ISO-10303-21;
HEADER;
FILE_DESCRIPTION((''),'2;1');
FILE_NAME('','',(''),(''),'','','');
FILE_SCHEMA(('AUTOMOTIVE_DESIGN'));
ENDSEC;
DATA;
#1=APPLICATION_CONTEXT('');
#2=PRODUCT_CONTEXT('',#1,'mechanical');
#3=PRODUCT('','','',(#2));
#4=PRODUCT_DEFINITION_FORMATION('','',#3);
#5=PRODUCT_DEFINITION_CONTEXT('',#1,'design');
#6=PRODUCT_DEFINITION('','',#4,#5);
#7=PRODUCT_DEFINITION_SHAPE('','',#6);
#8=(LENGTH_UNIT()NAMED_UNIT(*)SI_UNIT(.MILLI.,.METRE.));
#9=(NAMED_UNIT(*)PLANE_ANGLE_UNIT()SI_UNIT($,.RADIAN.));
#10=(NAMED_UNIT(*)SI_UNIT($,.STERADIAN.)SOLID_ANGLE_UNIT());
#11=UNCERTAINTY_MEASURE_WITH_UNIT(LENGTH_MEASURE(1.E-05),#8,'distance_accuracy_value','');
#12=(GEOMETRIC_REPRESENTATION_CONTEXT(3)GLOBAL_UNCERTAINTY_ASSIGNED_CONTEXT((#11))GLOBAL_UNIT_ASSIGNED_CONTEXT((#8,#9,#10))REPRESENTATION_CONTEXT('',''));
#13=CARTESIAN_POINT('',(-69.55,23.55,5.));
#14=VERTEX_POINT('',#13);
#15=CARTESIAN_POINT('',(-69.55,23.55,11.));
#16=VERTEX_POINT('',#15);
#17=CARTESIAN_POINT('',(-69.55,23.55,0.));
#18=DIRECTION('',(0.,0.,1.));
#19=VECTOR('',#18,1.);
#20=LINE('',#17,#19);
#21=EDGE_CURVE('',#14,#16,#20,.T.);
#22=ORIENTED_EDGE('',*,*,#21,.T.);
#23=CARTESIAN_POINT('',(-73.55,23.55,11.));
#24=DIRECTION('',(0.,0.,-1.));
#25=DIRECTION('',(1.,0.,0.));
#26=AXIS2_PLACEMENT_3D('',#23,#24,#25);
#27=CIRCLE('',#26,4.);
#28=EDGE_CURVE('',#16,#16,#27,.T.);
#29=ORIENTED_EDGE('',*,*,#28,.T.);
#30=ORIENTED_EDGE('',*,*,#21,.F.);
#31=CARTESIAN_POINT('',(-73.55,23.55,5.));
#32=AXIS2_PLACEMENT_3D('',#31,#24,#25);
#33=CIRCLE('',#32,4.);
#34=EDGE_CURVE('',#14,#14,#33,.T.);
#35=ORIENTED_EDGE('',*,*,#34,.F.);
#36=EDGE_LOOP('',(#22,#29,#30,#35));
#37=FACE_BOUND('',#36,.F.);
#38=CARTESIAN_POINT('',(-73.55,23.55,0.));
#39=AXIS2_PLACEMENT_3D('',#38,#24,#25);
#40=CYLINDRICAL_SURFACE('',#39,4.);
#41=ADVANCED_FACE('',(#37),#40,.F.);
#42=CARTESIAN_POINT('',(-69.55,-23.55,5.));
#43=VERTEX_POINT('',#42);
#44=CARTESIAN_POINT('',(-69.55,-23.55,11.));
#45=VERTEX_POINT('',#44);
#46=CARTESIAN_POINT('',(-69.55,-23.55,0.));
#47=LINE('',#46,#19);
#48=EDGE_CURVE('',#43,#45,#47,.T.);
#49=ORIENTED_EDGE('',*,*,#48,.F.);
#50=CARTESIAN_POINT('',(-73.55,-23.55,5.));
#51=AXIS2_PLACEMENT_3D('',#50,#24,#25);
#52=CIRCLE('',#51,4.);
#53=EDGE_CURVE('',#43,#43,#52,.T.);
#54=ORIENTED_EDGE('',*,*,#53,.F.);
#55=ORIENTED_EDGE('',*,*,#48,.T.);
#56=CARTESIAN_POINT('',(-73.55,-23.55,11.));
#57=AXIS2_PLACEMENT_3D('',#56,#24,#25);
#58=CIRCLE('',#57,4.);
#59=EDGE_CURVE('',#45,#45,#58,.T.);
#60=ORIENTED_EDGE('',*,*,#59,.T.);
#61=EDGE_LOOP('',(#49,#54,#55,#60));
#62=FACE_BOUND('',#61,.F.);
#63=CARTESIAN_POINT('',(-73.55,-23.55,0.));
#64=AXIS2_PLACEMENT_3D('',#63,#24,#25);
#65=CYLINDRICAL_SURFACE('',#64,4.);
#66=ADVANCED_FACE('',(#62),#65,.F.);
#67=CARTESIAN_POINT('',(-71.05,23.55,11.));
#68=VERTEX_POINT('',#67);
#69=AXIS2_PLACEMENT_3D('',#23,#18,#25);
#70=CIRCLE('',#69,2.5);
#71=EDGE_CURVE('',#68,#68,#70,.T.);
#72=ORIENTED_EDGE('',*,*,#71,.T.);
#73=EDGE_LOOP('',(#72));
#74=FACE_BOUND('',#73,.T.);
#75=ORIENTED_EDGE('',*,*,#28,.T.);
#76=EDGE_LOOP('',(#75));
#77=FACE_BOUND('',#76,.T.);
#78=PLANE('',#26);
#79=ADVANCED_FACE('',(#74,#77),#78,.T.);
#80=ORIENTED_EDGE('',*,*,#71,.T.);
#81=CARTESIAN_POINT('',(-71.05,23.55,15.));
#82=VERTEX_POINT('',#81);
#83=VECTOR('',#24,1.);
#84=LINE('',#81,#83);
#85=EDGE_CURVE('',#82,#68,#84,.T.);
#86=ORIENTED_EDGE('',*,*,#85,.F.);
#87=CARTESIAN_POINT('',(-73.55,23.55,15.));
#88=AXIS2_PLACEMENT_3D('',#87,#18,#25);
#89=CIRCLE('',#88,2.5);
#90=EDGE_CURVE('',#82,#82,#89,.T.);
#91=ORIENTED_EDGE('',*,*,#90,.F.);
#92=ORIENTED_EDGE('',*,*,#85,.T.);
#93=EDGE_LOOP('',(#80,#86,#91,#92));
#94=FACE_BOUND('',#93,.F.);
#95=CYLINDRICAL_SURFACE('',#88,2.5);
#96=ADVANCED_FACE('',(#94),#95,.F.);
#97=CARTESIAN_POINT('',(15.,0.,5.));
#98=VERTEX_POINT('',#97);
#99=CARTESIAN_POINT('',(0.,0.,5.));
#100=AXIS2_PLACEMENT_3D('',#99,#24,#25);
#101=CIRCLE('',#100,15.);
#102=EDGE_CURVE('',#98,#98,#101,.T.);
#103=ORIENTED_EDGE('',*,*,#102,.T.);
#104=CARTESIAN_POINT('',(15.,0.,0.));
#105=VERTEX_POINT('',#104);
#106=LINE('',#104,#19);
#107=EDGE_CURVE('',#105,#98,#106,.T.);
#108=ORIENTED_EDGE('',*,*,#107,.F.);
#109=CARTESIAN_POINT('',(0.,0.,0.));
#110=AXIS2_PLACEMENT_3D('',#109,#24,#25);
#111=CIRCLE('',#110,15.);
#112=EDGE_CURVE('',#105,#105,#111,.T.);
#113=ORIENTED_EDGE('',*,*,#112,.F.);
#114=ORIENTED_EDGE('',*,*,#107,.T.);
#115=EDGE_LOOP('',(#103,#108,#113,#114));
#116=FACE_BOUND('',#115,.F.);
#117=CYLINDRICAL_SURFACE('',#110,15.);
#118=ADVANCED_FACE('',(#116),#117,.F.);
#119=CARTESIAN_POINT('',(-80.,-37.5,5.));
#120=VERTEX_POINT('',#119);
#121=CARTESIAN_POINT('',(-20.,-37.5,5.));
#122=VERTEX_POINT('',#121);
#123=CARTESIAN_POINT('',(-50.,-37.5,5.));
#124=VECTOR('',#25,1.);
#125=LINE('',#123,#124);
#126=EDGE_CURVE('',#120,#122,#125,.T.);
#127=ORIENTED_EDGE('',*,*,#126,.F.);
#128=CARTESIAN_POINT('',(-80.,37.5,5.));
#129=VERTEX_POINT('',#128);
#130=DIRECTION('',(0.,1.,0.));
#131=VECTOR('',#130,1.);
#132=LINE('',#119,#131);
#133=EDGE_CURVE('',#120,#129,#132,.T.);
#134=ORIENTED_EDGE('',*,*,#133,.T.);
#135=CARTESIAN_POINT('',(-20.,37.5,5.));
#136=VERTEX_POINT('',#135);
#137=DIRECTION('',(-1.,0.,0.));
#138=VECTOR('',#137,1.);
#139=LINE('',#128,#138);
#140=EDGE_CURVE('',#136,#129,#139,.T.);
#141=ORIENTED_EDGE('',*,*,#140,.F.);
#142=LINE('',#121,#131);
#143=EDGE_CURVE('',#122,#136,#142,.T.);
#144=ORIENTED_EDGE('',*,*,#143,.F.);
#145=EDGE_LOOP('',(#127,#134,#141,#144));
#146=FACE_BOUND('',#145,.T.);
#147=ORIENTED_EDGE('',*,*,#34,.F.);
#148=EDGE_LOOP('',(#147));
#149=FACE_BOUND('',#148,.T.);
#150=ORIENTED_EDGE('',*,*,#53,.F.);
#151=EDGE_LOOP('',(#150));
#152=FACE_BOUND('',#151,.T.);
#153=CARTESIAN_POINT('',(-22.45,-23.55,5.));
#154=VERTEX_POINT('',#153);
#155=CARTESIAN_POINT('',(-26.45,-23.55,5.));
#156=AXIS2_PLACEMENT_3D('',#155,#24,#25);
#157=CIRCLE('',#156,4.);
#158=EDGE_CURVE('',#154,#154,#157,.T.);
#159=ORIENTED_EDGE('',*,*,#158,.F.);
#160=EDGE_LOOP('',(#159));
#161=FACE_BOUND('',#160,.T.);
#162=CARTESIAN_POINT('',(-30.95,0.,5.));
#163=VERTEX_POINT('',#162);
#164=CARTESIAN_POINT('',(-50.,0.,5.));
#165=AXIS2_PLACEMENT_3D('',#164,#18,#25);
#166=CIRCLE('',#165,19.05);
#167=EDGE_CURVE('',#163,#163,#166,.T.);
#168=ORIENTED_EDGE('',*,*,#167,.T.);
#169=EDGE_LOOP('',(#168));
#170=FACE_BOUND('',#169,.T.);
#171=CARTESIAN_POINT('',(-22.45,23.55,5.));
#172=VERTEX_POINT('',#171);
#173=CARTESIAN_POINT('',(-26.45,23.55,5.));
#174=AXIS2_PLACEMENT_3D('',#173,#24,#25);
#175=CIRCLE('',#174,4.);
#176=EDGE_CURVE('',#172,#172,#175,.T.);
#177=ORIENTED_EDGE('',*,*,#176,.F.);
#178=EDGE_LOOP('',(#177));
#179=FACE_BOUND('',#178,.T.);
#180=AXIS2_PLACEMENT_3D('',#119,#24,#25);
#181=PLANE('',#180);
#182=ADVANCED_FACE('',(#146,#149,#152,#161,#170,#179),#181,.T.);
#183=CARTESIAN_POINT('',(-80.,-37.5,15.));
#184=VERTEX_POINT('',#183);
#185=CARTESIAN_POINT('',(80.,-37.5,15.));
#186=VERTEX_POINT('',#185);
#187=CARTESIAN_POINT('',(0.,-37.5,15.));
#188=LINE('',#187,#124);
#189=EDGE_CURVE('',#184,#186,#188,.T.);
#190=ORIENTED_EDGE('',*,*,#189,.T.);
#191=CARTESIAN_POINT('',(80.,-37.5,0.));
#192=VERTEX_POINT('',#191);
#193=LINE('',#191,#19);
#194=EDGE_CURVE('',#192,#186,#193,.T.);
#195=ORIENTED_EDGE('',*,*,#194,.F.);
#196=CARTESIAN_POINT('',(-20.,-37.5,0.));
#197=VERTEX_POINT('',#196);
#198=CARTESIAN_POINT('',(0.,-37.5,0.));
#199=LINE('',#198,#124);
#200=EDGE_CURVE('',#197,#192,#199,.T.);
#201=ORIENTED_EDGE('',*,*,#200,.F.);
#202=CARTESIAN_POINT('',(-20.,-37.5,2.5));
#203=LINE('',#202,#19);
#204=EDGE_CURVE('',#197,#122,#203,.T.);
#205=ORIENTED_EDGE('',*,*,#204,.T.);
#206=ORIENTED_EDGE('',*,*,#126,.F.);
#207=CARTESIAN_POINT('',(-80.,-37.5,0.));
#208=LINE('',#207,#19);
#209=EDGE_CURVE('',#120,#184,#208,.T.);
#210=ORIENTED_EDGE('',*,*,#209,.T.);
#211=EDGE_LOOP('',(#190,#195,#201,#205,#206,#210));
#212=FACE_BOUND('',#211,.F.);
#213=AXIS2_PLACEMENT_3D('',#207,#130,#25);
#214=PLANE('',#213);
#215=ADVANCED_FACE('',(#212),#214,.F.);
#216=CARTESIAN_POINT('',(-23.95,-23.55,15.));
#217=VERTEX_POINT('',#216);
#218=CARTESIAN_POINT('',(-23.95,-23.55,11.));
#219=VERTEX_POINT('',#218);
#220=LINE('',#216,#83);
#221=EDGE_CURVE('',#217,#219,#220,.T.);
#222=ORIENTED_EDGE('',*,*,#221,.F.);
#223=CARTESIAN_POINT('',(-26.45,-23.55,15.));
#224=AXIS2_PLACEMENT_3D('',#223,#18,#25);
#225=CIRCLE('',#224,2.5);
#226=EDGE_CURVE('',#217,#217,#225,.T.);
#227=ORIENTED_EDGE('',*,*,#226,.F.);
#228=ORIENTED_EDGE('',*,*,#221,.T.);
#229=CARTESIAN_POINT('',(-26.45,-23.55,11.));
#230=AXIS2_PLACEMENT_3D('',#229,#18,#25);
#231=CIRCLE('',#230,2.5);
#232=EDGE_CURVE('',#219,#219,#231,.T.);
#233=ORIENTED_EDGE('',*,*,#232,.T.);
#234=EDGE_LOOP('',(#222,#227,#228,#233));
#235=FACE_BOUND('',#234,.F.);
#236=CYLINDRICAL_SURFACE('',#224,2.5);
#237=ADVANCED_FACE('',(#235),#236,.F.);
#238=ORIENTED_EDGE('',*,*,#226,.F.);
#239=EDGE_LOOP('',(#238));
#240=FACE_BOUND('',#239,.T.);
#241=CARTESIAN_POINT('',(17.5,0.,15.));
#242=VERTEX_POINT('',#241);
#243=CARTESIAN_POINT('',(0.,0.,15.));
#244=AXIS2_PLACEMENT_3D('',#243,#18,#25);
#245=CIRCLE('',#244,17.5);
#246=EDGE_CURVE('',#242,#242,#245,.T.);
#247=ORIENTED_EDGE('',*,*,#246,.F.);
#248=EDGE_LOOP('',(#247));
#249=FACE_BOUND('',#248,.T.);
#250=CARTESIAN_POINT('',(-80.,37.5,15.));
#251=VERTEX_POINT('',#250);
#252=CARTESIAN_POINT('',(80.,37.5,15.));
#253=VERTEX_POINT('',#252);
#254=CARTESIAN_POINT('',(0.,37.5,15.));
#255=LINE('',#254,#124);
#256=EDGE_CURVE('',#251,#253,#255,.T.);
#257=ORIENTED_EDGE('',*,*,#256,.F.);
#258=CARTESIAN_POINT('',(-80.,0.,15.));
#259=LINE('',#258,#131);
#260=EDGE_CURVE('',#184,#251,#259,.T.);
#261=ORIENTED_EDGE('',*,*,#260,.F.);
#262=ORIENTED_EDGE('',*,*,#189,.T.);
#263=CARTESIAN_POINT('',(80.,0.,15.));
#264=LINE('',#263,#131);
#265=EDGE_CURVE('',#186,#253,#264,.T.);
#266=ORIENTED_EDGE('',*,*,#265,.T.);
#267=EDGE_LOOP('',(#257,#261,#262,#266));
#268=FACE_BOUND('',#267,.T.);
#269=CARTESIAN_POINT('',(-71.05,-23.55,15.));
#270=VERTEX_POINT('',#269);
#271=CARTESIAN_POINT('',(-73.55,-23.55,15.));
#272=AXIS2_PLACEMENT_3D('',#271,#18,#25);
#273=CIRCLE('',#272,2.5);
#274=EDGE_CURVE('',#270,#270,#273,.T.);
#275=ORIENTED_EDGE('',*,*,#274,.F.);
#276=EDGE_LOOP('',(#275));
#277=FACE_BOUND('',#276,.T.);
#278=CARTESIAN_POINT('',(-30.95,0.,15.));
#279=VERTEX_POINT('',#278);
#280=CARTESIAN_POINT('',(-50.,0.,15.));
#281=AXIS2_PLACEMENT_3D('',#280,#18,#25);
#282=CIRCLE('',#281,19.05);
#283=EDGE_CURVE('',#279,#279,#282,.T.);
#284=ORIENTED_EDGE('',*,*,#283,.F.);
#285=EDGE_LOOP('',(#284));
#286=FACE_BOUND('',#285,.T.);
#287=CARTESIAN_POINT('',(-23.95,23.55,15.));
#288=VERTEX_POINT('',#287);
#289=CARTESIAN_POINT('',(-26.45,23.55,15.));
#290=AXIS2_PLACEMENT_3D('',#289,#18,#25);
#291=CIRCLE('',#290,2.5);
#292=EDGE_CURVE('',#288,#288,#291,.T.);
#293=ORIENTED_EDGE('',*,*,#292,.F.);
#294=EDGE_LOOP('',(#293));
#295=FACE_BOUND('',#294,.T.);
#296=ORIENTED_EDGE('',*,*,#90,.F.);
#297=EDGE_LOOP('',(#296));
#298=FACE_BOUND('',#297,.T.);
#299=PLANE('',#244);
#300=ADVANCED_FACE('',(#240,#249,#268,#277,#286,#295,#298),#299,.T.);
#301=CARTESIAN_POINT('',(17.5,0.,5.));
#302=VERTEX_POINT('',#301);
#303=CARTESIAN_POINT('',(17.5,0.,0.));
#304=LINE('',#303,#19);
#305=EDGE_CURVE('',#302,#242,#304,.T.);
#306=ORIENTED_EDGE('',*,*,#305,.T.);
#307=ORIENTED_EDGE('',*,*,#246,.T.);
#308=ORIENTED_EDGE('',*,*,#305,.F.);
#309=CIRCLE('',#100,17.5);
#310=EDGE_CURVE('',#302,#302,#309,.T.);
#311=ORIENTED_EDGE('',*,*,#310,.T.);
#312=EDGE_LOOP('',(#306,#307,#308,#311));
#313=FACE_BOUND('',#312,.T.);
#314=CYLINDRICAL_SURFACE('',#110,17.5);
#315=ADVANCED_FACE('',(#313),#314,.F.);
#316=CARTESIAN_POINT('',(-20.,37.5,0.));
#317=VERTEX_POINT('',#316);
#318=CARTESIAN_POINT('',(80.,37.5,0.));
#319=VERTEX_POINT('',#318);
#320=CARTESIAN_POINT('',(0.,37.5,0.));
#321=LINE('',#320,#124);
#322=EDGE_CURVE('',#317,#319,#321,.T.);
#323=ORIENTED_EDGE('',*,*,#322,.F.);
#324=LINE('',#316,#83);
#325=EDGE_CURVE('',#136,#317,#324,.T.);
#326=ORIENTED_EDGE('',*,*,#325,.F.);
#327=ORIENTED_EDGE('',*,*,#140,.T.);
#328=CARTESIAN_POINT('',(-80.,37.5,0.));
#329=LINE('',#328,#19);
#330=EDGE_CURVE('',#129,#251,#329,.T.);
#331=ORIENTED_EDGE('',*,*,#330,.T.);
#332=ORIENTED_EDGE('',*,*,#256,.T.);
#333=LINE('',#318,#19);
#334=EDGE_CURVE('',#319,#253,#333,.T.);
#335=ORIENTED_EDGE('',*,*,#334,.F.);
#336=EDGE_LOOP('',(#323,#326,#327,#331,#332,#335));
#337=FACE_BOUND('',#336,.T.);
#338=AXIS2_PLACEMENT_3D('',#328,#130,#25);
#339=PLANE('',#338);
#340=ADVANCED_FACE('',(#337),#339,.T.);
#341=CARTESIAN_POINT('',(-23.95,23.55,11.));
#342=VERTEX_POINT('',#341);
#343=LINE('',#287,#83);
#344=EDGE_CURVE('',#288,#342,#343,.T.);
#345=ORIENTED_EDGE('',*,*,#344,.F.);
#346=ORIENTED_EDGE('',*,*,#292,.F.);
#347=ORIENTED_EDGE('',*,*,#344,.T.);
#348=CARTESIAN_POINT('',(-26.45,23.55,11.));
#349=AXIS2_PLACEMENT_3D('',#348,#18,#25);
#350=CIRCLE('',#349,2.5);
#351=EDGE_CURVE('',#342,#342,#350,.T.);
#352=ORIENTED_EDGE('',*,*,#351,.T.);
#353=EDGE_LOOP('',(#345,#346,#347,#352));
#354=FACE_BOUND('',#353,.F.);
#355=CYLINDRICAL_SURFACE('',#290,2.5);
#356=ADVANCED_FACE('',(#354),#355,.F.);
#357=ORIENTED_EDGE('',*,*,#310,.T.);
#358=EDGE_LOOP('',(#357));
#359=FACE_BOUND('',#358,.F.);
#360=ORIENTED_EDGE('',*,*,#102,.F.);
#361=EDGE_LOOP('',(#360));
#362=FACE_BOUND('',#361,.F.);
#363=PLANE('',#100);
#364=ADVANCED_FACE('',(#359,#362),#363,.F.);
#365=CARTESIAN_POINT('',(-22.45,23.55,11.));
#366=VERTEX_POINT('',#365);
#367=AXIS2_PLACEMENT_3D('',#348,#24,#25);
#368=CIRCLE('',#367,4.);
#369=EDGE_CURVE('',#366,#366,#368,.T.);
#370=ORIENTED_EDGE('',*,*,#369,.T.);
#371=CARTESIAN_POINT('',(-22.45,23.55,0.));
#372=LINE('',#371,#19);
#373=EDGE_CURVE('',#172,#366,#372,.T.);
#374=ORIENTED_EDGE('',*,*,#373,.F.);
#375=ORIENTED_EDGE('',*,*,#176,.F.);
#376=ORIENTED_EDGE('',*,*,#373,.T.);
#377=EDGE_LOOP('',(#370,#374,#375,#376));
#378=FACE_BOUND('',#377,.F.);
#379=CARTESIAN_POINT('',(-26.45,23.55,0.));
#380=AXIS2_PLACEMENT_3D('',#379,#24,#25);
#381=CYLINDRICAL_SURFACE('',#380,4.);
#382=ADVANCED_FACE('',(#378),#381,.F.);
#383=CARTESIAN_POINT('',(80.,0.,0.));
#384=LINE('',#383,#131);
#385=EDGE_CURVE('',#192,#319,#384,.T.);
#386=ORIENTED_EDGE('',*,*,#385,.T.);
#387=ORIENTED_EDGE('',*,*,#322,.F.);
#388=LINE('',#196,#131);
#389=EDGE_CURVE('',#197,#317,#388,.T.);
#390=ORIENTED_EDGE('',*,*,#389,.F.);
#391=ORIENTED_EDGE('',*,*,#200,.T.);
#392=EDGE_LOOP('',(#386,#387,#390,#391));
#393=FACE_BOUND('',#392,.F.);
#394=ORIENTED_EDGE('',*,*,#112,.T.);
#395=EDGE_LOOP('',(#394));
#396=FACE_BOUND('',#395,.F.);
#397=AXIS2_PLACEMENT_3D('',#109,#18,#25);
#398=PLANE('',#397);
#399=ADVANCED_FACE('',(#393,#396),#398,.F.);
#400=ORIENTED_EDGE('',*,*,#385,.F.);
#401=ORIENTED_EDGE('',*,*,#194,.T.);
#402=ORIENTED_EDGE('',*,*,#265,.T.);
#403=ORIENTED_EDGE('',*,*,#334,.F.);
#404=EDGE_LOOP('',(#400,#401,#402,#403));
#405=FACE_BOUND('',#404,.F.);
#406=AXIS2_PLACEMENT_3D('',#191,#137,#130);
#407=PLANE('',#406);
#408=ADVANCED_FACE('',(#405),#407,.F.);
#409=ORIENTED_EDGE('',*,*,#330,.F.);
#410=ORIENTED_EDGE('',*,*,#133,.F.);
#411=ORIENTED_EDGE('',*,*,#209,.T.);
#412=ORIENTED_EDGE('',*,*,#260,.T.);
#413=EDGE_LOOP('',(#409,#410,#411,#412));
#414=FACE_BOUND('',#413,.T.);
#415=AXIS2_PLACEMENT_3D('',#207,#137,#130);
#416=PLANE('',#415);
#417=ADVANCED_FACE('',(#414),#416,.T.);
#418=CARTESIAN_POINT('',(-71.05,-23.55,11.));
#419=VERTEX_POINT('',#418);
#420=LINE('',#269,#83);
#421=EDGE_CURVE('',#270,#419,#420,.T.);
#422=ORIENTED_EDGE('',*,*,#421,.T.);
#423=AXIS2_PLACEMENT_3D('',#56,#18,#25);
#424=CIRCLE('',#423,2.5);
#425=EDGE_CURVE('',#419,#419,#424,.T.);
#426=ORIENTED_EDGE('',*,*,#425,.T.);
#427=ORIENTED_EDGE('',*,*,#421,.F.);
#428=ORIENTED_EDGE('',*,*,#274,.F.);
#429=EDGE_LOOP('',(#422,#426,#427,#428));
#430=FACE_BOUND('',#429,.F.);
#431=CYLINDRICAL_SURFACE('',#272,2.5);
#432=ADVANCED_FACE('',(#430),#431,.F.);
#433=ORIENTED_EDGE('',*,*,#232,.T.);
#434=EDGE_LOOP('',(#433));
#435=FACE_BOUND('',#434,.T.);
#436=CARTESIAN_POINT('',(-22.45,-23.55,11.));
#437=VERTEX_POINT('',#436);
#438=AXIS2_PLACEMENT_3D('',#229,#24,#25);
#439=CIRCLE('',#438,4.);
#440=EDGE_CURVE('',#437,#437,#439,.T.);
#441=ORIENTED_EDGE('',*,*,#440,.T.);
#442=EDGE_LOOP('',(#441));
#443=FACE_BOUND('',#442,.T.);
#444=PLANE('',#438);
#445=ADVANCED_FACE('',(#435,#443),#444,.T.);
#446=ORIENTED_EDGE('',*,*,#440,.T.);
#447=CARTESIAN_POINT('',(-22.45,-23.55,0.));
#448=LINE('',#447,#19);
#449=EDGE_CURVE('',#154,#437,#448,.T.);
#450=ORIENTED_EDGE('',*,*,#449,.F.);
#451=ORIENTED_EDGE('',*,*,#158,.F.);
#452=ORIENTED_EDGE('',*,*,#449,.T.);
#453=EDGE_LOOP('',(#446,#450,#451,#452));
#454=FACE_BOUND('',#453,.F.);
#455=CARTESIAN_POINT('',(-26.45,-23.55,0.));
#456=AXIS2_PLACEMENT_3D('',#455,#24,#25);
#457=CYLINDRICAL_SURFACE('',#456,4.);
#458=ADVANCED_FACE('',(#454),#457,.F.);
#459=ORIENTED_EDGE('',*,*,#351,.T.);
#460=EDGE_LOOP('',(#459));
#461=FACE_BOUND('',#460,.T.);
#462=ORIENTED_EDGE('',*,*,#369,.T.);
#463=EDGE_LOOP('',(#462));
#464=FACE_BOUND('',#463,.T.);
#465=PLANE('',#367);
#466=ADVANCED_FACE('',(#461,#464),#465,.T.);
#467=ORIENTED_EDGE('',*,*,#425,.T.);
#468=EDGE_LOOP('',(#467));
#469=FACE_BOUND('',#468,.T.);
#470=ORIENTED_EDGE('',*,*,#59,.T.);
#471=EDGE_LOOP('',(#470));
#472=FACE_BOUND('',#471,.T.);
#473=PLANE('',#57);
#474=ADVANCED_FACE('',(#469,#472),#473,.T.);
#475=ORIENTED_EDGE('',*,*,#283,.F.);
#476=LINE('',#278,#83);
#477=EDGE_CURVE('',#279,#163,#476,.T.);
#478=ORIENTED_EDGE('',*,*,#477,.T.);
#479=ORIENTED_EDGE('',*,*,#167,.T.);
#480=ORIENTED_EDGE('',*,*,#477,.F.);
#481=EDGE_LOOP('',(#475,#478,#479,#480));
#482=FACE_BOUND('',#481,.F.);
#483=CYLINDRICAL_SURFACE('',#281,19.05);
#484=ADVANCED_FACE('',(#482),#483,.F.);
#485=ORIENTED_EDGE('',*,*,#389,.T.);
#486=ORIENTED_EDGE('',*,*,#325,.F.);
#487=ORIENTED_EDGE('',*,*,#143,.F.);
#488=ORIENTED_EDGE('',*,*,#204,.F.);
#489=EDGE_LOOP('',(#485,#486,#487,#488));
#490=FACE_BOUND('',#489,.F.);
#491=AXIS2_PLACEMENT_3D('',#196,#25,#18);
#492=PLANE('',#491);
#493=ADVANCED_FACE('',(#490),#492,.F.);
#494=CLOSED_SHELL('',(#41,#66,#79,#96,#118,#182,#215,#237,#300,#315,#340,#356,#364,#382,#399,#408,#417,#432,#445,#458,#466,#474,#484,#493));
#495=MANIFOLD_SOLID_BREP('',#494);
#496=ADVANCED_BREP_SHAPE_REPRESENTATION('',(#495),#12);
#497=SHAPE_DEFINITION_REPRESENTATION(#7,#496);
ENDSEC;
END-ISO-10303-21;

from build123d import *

# Parameters (mm, degrees)
F0_W     = 160
F0_H     = 75
F0_R     = 17.5
F1_DEPTH = 15
F2_R     = 2.5
F2_R_2   = 19.05
F3_DEPTH = 25
F4_R     = 4
F5_DEPTH = 11
F6_W     = 60
F6_H     = 5
F7_DEPTH = 79.7
F8_R     = 19
F8_R_2   = 17.5
F8_R_3   = 15
F9_DEPTH = 5


# Not quite as in the source:
# - a feature names something its author has since deleted; it is built from what else it names


with BuildPart() as f1:
    # F0 (on Top) → F1 (new body)
    with BuildSketch(Plane.XY):
        Rectangle(F0_W, F0_H)
        Circle(F0_R, mode=Mode.SUBTRACT)
    extrude(amount=F1_DEPTH)

    # F2 (on face) → F3 (cut)
    with BuildSketch(Plane.XY.offset(15)):
        with Locations((-73.55, 23.55)):
            Circle(F2_R)
        with Locations((-26.45, 23.55)):
            Circle(F2_R)
        with Locations((-26.45, -23.55)):
            Circle(F2_R)
        with Locations((-73.55, -23.55)):
            Circle(F2_R)
        with Locations((-50, 0)):
            Circle(F2_R_2)
    extrude(amount=-F3_DEPTH, mode=Mode.SUBTRACT)

    # F4 (on face) → F5 (cut)
    with BuildSketch(Plane(origin=(0, 0, 0), x_dir=(1, 0, 0), z_dir=(0, 0, -1))):
        with Locations((-73.55, 23.55)):
            Circle(F4_R)
        with Locations((-26.45, 23.55)):
            Circle(F4_R)
        with Locations((-26.45, -23.55)):
            Circle(F4_R)
        with Locations((-73.55, -23.55)):
            Circle(F4_R)
    extrude(amount=-F5_DEPTH, mode=Mode.SUBTRACT)

    # F6 (on face) → F7 (cut)
    with BuildSketch(Plane.XZ.offset(37.5)):
        with Locations((-50, 2.5)):
            Rectangle(F6_W, F6_H)
    extrude(amount=-F7_DEPTH, mode=Mode.SUBTRACT)

    # F8 (on face) → F9 (join)
    with BuildSketch(Plane(origin=(0, 0, 0), x_dir=(1, 0, 0), z_dir=(0, 0, -1))):
        Circle(F8_R)
        Circle(F8_R_2, mode=Mode.SUBTRACT)
        Circle(F8_R_2)
        Circle(F8_R_3, mode=Mode.SUBTRACT)
    extrude(amount=-F9_DEPTH)


solid = f1.part
